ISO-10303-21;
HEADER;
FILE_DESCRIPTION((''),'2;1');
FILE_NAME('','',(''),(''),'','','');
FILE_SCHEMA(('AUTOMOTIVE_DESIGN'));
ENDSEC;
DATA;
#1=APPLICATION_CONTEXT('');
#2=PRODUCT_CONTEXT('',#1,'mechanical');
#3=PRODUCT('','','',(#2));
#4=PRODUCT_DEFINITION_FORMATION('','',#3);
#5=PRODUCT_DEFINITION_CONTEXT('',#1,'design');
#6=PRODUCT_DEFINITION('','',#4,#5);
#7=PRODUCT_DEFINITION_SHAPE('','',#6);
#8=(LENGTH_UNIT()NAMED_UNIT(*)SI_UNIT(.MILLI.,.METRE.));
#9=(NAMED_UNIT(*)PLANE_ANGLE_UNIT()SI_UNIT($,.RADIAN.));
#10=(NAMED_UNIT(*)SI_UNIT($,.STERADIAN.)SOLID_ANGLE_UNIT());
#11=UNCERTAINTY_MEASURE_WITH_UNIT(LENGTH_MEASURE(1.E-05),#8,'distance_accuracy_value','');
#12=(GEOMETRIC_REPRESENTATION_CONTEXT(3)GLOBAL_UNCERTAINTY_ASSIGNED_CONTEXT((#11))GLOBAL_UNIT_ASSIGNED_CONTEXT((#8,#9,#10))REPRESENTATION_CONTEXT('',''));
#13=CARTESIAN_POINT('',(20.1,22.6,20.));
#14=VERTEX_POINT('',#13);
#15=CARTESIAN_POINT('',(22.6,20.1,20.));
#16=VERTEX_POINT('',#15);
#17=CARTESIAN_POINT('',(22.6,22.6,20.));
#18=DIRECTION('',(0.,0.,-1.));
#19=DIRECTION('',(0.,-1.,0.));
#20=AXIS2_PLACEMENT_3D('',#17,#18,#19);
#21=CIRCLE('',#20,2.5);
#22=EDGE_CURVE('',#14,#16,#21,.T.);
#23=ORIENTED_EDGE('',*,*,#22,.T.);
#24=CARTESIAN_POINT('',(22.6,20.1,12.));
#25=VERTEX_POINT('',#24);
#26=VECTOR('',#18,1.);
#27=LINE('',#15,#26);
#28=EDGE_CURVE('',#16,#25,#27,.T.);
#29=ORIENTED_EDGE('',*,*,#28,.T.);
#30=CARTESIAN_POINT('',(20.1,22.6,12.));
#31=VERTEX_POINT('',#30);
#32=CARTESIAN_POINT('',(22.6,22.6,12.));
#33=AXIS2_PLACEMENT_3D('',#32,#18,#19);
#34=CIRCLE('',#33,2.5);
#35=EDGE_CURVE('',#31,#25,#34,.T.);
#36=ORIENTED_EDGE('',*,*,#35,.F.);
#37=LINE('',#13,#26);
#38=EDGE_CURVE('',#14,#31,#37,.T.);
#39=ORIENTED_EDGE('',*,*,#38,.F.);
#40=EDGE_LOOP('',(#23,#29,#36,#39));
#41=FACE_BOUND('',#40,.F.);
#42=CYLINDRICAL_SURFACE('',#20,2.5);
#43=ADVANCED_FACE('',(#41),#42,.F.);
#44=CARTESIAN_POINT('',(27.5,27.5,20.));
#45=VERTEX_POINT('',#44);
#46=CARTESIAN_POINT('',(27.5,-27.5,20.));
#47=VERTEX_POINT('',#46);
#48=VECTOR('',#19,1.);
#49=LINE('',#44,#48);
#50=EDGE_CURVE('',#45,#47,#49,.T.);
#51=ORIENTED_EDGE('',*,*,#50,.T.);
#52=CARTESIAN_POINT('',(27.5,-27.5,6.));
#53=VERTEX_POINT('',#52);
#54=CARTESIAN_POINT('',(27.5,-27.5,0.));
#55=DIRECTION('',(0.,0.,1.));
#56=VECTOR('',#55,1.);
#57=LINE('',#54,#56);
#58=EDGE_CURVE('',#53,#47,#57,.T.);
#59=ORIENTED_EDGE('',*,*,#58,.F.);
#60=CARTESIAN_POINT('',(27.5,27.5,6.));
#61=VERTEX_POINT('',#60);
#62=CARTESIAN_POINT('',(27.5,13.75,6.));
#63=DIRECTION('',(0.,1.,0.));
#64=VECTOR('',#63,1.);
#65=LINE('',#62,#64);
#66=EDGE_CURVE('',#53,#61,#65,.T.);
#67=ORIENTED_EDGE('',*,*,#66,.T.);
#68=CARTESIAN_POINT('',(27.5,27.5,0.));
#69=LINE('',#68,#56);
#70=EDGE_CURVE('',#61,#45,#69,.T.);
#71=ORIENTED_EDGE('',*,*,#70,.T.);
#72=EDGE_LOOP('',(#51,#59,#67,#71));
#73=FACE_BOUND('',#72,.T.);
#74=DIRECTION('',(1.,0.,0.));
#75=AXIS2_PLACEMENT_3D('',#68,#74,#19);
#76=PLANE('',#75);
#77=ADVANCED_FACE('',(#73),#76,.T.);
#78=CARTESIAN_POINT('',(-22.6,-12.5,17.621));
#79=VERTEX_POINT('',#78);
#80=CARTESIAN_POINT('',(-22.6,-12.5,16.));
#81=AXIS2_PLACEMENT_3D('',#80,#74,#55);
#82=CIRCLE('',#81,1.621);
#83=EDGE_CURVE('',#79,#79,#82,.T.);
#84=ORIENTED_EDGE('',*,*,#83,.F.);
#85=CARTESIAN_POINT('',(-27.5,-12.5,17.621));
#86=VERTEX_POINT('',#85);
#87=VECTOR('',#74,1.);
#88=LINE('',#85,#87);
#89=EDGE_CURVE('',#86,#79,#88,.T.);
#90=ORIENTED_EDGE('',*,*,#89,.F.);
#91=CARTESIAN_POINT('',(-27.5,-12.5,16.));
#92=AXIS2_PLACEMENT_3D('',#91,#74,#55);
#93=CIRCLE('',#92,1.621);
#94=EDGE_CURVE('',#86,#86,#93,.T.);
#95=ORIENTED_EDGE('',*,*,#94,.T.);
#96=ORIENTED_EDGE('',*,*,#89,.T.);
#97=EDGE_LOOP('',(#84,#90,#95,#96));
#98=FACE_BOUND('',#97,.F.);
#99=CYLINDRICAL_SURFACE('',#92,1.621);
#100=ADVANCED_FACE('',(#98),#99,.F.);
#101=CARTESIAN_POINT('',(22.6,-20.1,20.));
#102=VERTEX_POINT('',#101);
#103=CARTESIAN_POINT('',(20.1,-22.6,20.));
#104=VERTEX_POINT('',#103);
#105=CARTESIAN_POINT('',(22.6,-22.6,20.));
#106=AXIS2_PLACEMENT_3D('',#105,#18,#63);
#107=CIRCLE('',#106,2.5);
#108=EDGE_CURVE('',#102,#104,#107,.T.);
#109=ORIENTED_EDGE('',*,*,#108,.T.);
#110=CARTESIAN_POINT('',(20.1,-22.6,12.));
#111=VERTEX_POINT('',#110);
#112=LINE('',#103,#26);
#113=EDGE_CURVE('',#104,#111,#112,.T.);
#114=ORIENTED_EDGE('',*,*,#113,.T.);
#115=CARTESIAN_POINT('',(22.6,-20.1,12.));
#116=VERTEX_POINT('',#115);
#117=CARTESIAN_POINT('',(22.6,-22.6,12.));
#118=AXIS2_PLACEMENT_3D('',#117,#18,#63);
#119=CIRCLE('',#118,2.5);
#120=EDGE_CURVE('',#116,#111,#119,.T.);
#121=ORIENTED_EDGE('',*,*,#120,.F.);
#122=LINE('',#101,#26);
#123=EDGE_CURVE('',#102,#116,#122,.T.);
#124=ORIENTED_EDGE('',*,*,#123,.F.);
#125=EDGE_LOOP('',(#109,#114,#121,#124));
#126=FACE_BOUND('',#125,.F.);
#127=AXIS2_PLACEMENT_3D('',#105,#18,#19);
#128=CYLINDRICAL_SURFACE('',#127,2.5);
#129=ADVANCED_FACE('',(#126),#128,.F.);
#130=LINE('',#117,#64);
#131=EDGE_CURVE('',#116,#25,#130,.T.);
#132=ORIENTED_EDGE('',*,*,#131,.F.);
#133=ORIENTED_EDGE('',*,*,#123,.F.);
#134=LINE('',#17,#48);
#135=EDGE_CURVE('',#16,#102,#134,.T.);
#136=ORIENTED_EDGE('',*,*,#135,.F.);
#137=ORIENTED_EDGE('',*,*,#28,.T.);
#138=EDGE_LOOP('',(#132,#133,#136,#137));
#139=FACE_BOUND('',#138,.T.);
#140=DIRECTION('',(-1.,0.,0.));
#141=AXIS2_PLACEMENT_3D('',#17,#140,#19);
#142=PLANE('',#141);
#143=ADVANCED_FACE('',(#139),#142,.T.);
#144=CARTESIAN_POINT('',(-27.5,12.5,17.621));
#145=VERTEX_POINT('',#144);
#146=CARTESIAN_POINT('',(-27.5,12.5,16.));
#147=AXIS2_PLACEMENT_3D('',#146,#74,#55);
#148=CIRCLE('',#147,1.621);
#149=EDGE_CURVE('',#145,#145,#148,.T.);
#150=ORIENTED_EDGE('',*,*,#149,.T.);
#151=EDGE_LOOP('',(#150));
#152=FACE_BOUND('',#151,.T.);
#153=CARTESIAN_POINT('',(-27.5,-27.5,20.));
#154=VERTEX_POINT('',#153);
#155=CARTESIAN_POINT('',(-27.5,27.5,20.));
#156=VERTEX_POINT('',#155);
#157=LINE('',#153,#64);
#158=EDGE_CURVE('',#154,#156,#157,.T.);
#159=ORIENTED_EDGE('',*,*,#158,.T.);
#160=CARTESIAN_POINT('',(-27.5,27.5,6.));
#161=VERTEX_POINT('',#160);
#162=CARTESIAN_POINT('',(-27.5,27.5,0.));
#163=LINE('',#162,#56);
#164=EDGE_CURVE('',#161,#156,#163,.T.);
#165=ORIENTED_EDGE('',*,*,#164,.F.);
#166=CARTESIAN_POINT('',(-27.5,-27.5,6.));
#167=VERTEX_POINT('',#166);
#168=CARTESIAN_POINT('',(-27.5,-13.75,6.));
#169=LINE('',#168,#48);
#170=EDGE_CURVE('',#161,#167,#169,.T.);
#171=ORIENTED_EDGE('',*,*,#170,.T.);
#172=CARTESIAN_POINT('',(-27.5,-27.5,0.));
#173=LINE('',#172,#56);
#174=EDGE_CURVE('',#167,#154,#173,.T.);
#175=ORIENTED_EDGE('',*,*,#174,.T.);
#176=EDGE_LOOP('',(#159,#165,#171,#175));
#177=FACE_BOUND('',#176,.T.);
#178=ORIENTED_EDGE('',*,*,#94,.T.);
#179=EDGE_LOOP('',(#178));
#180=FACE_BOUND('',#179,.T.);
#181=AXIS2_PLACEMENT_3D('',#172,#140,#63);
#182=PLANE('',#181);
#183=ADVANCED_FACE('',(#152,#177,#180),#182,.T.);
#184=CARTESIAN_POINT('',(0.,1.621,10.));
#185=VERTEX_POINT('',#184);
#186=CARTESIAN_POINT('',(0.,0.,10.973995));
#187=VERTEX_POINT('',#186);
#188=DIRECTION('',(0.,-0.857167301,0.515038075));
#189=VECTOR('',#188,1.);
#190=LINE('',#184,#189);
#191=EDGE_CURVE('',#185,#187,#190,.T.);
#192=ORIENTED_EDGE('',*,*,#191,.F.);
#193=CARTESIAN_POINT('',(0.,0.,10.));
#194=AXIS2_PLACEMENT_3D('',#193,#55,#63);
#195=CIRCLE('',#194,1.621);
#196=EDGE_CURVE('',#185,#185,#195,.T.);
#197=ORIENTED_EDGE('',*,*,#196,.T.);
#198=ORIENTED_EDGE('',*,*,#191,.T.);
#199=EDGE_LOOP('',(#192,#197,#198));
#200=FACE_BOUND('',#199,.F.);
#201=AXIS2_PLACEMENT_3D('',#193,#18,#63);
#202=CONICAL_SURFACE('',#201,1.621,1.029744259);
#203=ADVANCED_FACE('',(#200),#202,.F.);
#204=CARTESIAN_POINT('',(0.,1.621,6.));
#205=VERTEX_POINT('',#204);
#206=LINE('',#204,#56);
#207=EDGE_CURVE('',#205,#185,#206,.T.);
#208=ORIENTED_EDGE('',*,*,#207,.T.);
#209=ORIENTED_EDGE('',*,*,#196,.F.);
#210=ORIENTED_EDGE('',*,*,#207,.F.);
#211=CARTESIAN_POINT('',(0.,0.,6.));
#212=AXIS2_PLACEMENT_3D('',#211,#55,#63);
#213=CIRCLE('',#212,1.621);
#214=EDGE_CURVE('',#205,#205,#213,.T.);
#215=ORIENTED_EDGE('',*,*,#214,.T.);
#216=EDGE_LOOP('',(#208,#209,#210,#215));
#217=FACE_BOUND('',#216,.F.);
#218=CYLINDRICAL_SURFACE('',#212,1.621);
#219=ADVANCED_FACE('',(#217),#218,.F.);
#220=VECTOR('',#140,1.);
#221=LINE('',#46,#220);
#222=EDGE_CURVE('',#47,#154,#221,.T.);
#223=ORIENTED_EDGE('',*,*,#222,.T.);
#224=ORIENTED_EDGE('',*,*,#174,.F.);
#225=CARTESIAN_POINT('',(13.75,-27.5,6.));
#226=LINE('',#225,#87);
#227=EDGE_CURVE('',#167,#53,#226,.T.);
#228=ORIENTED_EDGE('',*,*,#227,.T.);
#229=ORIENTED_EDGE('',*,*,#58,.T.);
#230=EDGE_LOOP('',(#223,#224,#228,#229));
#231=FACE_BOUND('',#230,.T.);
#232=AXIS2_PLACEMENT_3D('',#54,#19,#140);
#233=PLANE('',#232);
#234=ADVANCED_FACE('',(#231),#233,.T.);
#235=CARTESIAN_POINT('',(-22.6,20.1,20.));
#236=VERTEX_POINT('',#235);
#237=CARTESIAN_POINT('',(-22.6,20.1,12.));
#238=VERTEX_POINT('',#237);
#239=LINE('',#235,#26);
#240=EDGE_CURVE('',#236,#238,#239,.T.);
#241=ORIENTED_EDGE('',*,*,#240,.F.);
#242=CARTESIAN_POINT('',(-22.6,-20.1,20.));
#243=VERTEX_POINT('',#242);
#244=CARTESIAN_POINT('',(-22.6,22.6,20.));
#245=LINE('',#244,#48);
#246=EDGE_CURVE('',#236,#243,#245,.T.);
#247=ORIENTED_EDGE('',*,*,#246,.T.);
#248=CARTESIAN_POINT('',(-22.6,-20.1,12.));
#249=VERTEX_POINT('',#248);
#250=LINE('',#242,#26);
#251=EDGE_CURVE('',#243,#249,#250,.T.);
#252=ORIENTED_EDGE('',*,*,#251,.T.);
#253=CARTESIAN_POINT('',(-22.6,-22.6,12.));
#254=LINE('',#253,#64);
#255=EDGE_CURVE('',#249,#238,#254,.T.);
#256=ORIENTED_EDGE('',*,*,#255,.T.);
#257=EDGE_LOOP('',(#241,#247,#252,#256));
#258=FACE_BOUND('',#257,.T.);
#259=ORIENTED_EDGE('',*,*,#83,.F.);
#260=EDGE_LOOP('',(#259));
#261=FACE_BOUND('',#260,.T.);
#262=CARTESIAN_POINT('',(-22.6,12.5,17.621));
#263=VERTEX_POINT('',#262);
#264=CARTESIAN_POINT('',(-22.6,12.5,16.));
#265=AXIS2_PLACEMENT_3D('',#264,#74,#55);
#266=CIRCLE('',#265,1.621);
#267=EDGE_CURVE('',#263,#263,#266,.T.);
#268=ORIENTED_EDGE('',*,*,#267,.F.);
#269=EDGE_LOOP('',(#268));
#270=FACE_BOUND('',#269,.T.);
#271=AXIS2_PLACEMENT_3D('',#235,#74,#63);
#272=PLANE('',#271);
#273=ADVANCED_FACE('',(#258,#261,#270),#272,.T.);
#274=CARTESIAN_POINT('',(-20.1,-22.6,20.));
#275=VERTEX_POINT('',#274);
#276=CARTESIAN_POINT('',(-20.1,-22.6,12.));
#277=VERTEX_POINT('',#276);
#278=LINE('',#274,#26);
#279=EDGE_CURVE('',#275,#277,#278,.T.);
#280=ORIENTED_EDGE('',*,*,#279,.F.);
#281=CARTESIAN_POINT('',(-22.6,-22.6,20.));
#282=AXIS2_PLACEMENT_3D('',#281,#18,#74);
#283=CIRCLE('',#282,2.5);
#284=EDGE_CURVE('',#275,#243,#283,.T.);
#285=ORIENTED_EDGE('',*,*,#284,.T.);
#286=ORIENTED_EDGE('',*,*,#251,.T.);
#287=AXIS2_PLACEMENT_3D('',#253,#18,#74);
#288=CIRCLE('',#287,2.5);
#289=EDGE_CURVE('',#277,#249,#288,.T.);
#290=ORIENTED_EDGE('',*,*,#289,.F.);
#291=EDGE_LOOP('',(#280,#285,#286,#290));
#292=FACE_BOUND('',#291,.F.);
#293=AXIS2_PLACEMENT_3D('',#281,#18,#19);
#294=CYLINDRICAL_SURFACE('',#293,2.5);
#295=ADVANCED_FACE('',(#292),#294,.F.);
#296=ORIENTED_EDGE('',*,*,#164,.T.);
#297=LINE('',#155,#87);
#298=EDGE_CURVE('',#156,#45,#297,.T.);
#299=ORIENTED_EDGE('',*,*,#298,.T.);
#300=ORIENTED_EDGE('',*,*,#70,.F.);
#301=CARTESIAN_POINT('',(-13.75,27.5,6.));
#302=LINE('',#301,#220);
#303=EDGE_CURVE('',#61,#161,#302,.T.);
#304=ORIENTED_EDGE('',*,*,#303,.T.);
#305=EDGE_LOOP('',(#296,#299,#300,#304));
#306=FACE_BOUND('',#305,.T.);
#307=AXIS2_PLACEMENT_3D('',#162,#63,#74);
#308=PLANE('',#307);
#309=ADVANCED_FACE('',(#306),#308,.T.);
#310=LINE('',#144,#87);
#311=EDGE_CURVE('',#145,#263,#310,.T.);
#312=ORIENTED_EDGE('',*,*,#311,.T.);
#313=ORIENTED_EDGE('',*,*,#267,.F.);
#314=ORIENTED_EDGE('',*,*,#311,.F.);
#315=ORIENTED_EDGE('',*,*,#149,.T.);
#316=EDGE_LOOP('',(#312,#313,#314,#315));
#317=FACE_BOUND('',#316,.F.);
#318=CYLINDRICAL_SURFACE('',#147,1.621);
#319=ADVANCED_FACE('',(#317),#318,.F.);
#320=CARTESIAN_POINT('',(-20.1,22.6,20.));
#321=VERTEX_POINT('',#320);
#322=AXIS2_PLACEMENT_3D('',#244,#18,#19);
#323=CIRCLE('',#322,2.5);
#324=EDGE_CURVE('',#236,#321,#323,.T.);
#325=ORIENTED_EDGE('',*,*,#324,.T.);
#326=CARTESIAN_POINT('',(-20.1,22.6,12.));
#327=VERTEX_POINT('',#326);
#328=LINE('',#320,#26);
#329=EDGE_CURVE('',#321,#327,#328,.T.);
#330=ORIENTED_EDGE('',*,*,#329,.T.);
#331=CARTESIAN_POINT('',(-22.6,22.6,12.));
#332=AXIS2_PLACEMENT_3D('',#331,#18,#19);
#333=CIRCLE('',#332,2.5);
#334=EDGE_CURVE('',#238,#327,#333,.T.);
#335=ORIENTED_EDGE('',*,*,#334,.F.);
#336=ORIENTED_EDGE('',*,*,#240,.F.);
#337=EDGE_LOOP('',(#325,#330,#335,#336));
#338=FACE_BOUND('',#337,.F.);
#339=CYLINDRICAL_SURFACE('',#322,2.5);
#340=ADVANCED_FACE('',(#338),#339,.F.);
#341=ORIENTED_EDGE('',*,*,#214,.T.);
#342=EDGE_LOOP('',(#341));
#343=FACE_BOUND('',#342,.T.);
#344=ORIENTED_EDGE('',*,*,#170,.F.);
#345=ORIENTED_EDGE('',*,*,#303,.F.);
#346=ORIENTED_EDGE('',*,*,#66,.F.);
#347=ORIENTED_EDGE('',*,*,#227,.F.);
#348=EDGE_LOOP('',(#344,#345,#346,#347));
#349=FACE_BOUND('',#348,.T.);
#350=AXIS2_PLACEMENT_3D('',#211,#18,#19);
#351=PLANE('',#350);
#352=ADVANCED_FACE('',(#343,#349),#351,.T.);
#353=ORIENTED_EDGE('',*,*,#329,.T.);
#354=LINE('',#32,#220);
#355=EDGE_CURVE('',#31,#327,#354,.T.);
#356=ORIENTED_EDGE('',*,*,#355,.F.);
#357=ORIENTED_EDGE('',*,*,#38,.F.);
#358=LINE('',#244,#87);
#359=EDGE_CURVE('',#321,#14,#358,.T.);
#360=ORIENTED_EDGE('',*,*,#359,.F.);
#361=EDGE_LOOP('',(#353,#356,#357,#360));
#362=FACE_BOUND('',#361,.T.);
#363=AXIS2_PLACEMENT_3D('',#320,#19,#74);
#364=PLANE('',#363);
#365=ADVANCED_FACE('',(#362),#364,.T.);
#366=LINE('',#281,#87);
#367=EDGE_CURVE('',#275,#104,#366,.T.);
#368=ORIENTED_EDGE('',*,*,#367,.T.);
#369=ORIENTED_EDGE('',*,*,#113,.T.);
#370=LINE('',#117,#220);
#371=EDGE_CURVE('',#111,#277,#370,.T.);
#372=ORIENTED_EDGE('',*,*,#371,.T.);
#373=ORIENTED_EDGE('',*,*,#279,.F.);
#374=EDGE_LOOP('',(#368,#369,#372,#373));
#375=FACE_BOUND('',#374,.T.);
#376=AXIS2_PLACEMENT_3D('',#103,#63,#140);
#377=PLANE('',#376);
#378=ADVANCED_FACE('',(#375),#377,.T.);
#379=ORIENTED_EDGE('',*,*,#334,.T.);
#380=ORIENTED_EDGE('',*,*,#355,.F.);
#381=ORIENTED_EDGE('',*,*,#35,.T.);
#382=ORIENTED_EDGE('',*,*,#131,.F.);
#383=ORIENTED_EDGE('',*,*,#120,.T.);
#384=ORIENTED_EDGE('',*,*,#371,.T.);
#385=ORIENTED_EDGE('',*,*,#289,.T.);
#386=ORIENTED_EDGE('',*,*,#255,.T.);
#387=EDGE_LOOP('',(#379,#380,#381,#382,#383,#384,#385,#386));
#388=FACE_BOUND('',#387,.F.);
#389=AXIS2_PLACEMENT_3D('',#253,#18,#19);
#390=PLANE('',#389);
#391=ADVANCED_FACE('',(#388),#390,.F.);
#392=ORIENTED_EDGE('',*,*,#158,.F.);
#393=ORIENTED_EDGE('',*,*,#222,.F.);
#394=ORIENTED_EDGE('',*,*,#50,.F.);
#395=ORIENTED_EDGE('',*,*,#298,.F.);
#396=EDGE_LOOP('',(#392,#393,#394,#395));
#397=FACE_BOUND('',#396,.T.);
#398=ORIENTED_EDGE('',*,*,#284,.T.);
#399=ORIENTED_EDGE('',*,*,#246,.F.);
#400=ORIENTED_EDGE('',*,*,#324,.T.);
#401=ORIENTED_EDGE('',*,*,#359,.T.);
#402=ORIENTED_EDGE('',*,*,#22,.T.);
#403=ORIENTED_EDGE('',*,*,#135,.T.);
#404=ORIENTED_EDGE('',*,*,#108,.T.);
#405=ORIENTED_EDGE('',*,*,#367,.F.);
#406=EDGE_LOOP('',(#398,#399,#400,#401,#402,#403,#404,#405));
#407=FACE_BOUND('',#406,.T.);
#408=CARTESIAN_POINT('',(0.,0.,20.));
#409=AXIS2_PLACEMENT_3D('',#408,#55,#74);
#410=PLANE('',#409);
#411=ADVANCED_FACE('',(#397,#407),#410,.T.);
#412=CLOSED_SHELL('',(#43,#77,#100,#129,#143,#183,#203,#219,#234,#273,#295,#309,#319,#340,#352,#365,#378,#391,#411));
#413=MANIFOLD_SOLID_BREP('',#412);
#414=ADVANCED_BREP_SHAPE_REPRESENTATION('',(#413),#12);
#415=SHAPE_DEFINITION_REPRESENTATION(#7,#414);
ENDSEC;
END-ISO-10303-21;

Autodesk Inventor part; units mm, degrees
ref_plane "YZ Plane" through (0, 0, 0) normal (1, 0, 0) x (0, 1, 0)
ref_plane "XZ Plane" through (0, 0, 0) normal (0, 1, 0) x (-1, 0, 0)
ref_plane "XY Plane" through (0, 0, 0) normal (0, 0, 1) x (1, 0, 0)
sketch "Sketch1" plane through (0, 0, 0) normal (0, 0, 1) x (1, 0, 0)
  line L0 (0, 38.5) -> (0, -38.5) construction
  line L1 (-38.5, 0) -> (38.5, 0) construction
  line L2 (-27.5, 27.5) -> (27.5, 27.5)
  line L3 (27.5, 27.5) -> (27.5, -27.5)
  line L4 (27.5, -27.5) -> (-27.5, -27.5)
  line L5 (-27.5, -27.5) -> (-27.5, 27.5)
  point P0 (0, 0)
  dimension "d0" = 55
  dimension "d1" = 55
extrude "Extrusion1" add sketch "Sketch1" along normal blind 20
sketch "Sketch4" plane through (0, 0, 20) normal (0, 0, 1) x (1, 0, 0)
  line L0 (-38.5, 0) -> (38.5, 0) construction
  line L1 (0, 38.5) -> (0, -38.5) construction
  line L2 (-22.6, 22.6) -> (22.6, 22.6) construction
  line L3 (22.6, 22.6) -> (22.6, -22.6) construction
  line L4 (22.6, -22.6) -> (-22.6, -22.6) construction
  line L5 (-22.6, -22.6) -> (-22.6, 22.6) construction
  point P0 (0, 0)
  dimension "d15" = 45.2
  dimension "d16" = 45.2
hole "Hole2" at (-22.6, 22.6, 20) at (22.6, 22.6, 20) at (22.6, -22.6, 20) at (-22.6, -22.6, 20) at (-22.6, 22.6, 20) at (22.6, 22.6, 20) direction (0, 0, -1) diameter 5 depth 8
sketch "Sketch5" plane through (0, 0, 20) normal (0, 0, 1) x (1, 0, 0)
  circle A0 centre (-22.6, 22.6) radius 2.5 projected
  circle A1 centre (22.6, -22.6) radius 2.5 projected
  line L0 (-22.6, 22.6) -> (22.6, 22.6)
  line L1 (22.6, 22.6) -> (22.6, -22.6)
  line L2 (22.6, -22.6) -> (-22.6, -22.6)
  line L3 (-22.6, -22.6) -> (-22.6, 22.6)
  point P0 (0, 0)
extrude "Extrusion3" cut sketch "Sketch5" against normal blind 8 contours L0 L1 A1 L2 L3 A0 | A0 L3 L0 | L1 L2 A1 picked at (-20.9542, 22.4146) picked at (21.1977, -21.7189)
sketch "Sketch6" plane through (-27.5, -27.5, 0) normal (-1, 0, 0) x (0, 0, 1)
  line L0 (0, 55) -> (20, 55) projected
  line L1 (0, 0) -> (20, 0) projected
  line L2 (20, 7.4) -> (12, 7.4) construction
  line L3 (20, 47.6) -> (20, 7.4) construction
  line L4 (12, 47.6) -> (20, 47.6) construction
  line L5 (12, 7.4) -> (12, 47.6) construction
  line L6 (16, 47.6) -> (16, 7.4) construction
  point P0 (0, 27.5)
  point P1 (16, 40)
  point P2 (16, 15)
  dimension "d26" = 15
  dimension "d27" = 15
hole "Hole3" at (-27.5, 12.5, 16) at (-27.5, -12.5, 16) direction (1, 0, 0) diameter 3.242 end up to surface thread size "M4x0.7" class "6H" standard "ANSI Metric M Profile"
sketch "Sketch8" plane through (0, 0, 0) normal (0, 0, -1) x (-1, 0, 0)
  line L0 (27.5, 27.5) -> (-27.5, 27.5) construction
  line L1 (-27.5, 27.5) -> (-27.5, -27.5) construction
  line L2 (-27.5, -27.5) -> (27.5, -27.5) construction
  line L3 (27.5, -27.5) -> (27.5, 27.5) construction
  line L4 (0, -38.5) -> (0, 38.5) construction
  line L5 (-38.5, 0) -> (38.5, 0) construction
  line L6 (-12.5, -12.5) -> (12.5, -12.5)
  line L7 (12.5, -12.5) -> (12.5, 12.5)
  line L8 (12.5, 12.5) -> (-12.5, 12.5)
  line L9 (-12.5, 12.5) -> (-12.5, -12.5)
  point P0 (0, 0)
  dimension "d44" = 25
  dimension "d45" = 25
extrude "Extrusion4" cut sketch "Sketch8" against normal blind 6
sketch "Sketch9" plane through (0, 0, 0) normal (0, 0, -1) x (-1, 0, 0)
  line L0 (12.5, 12.5) -> (12.5, -12.5) construction
  line L1 (12.5, -12.5) -> (-12.5, -12.5) construction
  line L2 (-12.5, -12.5) -> (-12.5, 12.5) construction
  line L3 (-12.5, 12.5) -> (12.5, 12.5) construction
  line L4 (27.5, 27.5) -> (-27.5, 27.5) construction
  line L5 (-27.5, 27.5) -> (-27.5, -27.5) construction
  line L6 (-27.5, -27.5) -> (27.5, -27.5) construction
  line L7 (27.5, -27.5) -> (27.5, 27.5) construction
  line L8 (12.5, -12.5) -> (-12.5, -12.5) construction
  point P0 (0, 0)
hole "Hole5" at (-12.5, 12.5, 0) at (-12.5, -12.5, 0) at (12.5, -12.5, 0) at (12.5, 12.5, 0) direction (0, 0, 1) diameter 3 depth 6
sketch "Sketch10" plane through (0, 0, 6) normal (0, 0, -1) x (-1, 0, 0)
  point P0 (0, 0)
  point P1 (0, 0)
hole "Hole6" at (0, 0, 6) direction (0, 0, 1) diameter 3.242 depth 4 tip angle 118 thread size "M4x0.7" class "6H" standard "ANSI Metric M Profile"
ref_plane "SplitPLane" through (0, 0, 6) normal (0, 0, -1) x (-1, 0, 0)
split "Split2" plane through (0, 0, 6) removes the side toward (0, 0, -1)
properties part number "Large-cuvette-mount-40mm-V4_top_extra0.2mm" material "PC/ABS Plastic"
